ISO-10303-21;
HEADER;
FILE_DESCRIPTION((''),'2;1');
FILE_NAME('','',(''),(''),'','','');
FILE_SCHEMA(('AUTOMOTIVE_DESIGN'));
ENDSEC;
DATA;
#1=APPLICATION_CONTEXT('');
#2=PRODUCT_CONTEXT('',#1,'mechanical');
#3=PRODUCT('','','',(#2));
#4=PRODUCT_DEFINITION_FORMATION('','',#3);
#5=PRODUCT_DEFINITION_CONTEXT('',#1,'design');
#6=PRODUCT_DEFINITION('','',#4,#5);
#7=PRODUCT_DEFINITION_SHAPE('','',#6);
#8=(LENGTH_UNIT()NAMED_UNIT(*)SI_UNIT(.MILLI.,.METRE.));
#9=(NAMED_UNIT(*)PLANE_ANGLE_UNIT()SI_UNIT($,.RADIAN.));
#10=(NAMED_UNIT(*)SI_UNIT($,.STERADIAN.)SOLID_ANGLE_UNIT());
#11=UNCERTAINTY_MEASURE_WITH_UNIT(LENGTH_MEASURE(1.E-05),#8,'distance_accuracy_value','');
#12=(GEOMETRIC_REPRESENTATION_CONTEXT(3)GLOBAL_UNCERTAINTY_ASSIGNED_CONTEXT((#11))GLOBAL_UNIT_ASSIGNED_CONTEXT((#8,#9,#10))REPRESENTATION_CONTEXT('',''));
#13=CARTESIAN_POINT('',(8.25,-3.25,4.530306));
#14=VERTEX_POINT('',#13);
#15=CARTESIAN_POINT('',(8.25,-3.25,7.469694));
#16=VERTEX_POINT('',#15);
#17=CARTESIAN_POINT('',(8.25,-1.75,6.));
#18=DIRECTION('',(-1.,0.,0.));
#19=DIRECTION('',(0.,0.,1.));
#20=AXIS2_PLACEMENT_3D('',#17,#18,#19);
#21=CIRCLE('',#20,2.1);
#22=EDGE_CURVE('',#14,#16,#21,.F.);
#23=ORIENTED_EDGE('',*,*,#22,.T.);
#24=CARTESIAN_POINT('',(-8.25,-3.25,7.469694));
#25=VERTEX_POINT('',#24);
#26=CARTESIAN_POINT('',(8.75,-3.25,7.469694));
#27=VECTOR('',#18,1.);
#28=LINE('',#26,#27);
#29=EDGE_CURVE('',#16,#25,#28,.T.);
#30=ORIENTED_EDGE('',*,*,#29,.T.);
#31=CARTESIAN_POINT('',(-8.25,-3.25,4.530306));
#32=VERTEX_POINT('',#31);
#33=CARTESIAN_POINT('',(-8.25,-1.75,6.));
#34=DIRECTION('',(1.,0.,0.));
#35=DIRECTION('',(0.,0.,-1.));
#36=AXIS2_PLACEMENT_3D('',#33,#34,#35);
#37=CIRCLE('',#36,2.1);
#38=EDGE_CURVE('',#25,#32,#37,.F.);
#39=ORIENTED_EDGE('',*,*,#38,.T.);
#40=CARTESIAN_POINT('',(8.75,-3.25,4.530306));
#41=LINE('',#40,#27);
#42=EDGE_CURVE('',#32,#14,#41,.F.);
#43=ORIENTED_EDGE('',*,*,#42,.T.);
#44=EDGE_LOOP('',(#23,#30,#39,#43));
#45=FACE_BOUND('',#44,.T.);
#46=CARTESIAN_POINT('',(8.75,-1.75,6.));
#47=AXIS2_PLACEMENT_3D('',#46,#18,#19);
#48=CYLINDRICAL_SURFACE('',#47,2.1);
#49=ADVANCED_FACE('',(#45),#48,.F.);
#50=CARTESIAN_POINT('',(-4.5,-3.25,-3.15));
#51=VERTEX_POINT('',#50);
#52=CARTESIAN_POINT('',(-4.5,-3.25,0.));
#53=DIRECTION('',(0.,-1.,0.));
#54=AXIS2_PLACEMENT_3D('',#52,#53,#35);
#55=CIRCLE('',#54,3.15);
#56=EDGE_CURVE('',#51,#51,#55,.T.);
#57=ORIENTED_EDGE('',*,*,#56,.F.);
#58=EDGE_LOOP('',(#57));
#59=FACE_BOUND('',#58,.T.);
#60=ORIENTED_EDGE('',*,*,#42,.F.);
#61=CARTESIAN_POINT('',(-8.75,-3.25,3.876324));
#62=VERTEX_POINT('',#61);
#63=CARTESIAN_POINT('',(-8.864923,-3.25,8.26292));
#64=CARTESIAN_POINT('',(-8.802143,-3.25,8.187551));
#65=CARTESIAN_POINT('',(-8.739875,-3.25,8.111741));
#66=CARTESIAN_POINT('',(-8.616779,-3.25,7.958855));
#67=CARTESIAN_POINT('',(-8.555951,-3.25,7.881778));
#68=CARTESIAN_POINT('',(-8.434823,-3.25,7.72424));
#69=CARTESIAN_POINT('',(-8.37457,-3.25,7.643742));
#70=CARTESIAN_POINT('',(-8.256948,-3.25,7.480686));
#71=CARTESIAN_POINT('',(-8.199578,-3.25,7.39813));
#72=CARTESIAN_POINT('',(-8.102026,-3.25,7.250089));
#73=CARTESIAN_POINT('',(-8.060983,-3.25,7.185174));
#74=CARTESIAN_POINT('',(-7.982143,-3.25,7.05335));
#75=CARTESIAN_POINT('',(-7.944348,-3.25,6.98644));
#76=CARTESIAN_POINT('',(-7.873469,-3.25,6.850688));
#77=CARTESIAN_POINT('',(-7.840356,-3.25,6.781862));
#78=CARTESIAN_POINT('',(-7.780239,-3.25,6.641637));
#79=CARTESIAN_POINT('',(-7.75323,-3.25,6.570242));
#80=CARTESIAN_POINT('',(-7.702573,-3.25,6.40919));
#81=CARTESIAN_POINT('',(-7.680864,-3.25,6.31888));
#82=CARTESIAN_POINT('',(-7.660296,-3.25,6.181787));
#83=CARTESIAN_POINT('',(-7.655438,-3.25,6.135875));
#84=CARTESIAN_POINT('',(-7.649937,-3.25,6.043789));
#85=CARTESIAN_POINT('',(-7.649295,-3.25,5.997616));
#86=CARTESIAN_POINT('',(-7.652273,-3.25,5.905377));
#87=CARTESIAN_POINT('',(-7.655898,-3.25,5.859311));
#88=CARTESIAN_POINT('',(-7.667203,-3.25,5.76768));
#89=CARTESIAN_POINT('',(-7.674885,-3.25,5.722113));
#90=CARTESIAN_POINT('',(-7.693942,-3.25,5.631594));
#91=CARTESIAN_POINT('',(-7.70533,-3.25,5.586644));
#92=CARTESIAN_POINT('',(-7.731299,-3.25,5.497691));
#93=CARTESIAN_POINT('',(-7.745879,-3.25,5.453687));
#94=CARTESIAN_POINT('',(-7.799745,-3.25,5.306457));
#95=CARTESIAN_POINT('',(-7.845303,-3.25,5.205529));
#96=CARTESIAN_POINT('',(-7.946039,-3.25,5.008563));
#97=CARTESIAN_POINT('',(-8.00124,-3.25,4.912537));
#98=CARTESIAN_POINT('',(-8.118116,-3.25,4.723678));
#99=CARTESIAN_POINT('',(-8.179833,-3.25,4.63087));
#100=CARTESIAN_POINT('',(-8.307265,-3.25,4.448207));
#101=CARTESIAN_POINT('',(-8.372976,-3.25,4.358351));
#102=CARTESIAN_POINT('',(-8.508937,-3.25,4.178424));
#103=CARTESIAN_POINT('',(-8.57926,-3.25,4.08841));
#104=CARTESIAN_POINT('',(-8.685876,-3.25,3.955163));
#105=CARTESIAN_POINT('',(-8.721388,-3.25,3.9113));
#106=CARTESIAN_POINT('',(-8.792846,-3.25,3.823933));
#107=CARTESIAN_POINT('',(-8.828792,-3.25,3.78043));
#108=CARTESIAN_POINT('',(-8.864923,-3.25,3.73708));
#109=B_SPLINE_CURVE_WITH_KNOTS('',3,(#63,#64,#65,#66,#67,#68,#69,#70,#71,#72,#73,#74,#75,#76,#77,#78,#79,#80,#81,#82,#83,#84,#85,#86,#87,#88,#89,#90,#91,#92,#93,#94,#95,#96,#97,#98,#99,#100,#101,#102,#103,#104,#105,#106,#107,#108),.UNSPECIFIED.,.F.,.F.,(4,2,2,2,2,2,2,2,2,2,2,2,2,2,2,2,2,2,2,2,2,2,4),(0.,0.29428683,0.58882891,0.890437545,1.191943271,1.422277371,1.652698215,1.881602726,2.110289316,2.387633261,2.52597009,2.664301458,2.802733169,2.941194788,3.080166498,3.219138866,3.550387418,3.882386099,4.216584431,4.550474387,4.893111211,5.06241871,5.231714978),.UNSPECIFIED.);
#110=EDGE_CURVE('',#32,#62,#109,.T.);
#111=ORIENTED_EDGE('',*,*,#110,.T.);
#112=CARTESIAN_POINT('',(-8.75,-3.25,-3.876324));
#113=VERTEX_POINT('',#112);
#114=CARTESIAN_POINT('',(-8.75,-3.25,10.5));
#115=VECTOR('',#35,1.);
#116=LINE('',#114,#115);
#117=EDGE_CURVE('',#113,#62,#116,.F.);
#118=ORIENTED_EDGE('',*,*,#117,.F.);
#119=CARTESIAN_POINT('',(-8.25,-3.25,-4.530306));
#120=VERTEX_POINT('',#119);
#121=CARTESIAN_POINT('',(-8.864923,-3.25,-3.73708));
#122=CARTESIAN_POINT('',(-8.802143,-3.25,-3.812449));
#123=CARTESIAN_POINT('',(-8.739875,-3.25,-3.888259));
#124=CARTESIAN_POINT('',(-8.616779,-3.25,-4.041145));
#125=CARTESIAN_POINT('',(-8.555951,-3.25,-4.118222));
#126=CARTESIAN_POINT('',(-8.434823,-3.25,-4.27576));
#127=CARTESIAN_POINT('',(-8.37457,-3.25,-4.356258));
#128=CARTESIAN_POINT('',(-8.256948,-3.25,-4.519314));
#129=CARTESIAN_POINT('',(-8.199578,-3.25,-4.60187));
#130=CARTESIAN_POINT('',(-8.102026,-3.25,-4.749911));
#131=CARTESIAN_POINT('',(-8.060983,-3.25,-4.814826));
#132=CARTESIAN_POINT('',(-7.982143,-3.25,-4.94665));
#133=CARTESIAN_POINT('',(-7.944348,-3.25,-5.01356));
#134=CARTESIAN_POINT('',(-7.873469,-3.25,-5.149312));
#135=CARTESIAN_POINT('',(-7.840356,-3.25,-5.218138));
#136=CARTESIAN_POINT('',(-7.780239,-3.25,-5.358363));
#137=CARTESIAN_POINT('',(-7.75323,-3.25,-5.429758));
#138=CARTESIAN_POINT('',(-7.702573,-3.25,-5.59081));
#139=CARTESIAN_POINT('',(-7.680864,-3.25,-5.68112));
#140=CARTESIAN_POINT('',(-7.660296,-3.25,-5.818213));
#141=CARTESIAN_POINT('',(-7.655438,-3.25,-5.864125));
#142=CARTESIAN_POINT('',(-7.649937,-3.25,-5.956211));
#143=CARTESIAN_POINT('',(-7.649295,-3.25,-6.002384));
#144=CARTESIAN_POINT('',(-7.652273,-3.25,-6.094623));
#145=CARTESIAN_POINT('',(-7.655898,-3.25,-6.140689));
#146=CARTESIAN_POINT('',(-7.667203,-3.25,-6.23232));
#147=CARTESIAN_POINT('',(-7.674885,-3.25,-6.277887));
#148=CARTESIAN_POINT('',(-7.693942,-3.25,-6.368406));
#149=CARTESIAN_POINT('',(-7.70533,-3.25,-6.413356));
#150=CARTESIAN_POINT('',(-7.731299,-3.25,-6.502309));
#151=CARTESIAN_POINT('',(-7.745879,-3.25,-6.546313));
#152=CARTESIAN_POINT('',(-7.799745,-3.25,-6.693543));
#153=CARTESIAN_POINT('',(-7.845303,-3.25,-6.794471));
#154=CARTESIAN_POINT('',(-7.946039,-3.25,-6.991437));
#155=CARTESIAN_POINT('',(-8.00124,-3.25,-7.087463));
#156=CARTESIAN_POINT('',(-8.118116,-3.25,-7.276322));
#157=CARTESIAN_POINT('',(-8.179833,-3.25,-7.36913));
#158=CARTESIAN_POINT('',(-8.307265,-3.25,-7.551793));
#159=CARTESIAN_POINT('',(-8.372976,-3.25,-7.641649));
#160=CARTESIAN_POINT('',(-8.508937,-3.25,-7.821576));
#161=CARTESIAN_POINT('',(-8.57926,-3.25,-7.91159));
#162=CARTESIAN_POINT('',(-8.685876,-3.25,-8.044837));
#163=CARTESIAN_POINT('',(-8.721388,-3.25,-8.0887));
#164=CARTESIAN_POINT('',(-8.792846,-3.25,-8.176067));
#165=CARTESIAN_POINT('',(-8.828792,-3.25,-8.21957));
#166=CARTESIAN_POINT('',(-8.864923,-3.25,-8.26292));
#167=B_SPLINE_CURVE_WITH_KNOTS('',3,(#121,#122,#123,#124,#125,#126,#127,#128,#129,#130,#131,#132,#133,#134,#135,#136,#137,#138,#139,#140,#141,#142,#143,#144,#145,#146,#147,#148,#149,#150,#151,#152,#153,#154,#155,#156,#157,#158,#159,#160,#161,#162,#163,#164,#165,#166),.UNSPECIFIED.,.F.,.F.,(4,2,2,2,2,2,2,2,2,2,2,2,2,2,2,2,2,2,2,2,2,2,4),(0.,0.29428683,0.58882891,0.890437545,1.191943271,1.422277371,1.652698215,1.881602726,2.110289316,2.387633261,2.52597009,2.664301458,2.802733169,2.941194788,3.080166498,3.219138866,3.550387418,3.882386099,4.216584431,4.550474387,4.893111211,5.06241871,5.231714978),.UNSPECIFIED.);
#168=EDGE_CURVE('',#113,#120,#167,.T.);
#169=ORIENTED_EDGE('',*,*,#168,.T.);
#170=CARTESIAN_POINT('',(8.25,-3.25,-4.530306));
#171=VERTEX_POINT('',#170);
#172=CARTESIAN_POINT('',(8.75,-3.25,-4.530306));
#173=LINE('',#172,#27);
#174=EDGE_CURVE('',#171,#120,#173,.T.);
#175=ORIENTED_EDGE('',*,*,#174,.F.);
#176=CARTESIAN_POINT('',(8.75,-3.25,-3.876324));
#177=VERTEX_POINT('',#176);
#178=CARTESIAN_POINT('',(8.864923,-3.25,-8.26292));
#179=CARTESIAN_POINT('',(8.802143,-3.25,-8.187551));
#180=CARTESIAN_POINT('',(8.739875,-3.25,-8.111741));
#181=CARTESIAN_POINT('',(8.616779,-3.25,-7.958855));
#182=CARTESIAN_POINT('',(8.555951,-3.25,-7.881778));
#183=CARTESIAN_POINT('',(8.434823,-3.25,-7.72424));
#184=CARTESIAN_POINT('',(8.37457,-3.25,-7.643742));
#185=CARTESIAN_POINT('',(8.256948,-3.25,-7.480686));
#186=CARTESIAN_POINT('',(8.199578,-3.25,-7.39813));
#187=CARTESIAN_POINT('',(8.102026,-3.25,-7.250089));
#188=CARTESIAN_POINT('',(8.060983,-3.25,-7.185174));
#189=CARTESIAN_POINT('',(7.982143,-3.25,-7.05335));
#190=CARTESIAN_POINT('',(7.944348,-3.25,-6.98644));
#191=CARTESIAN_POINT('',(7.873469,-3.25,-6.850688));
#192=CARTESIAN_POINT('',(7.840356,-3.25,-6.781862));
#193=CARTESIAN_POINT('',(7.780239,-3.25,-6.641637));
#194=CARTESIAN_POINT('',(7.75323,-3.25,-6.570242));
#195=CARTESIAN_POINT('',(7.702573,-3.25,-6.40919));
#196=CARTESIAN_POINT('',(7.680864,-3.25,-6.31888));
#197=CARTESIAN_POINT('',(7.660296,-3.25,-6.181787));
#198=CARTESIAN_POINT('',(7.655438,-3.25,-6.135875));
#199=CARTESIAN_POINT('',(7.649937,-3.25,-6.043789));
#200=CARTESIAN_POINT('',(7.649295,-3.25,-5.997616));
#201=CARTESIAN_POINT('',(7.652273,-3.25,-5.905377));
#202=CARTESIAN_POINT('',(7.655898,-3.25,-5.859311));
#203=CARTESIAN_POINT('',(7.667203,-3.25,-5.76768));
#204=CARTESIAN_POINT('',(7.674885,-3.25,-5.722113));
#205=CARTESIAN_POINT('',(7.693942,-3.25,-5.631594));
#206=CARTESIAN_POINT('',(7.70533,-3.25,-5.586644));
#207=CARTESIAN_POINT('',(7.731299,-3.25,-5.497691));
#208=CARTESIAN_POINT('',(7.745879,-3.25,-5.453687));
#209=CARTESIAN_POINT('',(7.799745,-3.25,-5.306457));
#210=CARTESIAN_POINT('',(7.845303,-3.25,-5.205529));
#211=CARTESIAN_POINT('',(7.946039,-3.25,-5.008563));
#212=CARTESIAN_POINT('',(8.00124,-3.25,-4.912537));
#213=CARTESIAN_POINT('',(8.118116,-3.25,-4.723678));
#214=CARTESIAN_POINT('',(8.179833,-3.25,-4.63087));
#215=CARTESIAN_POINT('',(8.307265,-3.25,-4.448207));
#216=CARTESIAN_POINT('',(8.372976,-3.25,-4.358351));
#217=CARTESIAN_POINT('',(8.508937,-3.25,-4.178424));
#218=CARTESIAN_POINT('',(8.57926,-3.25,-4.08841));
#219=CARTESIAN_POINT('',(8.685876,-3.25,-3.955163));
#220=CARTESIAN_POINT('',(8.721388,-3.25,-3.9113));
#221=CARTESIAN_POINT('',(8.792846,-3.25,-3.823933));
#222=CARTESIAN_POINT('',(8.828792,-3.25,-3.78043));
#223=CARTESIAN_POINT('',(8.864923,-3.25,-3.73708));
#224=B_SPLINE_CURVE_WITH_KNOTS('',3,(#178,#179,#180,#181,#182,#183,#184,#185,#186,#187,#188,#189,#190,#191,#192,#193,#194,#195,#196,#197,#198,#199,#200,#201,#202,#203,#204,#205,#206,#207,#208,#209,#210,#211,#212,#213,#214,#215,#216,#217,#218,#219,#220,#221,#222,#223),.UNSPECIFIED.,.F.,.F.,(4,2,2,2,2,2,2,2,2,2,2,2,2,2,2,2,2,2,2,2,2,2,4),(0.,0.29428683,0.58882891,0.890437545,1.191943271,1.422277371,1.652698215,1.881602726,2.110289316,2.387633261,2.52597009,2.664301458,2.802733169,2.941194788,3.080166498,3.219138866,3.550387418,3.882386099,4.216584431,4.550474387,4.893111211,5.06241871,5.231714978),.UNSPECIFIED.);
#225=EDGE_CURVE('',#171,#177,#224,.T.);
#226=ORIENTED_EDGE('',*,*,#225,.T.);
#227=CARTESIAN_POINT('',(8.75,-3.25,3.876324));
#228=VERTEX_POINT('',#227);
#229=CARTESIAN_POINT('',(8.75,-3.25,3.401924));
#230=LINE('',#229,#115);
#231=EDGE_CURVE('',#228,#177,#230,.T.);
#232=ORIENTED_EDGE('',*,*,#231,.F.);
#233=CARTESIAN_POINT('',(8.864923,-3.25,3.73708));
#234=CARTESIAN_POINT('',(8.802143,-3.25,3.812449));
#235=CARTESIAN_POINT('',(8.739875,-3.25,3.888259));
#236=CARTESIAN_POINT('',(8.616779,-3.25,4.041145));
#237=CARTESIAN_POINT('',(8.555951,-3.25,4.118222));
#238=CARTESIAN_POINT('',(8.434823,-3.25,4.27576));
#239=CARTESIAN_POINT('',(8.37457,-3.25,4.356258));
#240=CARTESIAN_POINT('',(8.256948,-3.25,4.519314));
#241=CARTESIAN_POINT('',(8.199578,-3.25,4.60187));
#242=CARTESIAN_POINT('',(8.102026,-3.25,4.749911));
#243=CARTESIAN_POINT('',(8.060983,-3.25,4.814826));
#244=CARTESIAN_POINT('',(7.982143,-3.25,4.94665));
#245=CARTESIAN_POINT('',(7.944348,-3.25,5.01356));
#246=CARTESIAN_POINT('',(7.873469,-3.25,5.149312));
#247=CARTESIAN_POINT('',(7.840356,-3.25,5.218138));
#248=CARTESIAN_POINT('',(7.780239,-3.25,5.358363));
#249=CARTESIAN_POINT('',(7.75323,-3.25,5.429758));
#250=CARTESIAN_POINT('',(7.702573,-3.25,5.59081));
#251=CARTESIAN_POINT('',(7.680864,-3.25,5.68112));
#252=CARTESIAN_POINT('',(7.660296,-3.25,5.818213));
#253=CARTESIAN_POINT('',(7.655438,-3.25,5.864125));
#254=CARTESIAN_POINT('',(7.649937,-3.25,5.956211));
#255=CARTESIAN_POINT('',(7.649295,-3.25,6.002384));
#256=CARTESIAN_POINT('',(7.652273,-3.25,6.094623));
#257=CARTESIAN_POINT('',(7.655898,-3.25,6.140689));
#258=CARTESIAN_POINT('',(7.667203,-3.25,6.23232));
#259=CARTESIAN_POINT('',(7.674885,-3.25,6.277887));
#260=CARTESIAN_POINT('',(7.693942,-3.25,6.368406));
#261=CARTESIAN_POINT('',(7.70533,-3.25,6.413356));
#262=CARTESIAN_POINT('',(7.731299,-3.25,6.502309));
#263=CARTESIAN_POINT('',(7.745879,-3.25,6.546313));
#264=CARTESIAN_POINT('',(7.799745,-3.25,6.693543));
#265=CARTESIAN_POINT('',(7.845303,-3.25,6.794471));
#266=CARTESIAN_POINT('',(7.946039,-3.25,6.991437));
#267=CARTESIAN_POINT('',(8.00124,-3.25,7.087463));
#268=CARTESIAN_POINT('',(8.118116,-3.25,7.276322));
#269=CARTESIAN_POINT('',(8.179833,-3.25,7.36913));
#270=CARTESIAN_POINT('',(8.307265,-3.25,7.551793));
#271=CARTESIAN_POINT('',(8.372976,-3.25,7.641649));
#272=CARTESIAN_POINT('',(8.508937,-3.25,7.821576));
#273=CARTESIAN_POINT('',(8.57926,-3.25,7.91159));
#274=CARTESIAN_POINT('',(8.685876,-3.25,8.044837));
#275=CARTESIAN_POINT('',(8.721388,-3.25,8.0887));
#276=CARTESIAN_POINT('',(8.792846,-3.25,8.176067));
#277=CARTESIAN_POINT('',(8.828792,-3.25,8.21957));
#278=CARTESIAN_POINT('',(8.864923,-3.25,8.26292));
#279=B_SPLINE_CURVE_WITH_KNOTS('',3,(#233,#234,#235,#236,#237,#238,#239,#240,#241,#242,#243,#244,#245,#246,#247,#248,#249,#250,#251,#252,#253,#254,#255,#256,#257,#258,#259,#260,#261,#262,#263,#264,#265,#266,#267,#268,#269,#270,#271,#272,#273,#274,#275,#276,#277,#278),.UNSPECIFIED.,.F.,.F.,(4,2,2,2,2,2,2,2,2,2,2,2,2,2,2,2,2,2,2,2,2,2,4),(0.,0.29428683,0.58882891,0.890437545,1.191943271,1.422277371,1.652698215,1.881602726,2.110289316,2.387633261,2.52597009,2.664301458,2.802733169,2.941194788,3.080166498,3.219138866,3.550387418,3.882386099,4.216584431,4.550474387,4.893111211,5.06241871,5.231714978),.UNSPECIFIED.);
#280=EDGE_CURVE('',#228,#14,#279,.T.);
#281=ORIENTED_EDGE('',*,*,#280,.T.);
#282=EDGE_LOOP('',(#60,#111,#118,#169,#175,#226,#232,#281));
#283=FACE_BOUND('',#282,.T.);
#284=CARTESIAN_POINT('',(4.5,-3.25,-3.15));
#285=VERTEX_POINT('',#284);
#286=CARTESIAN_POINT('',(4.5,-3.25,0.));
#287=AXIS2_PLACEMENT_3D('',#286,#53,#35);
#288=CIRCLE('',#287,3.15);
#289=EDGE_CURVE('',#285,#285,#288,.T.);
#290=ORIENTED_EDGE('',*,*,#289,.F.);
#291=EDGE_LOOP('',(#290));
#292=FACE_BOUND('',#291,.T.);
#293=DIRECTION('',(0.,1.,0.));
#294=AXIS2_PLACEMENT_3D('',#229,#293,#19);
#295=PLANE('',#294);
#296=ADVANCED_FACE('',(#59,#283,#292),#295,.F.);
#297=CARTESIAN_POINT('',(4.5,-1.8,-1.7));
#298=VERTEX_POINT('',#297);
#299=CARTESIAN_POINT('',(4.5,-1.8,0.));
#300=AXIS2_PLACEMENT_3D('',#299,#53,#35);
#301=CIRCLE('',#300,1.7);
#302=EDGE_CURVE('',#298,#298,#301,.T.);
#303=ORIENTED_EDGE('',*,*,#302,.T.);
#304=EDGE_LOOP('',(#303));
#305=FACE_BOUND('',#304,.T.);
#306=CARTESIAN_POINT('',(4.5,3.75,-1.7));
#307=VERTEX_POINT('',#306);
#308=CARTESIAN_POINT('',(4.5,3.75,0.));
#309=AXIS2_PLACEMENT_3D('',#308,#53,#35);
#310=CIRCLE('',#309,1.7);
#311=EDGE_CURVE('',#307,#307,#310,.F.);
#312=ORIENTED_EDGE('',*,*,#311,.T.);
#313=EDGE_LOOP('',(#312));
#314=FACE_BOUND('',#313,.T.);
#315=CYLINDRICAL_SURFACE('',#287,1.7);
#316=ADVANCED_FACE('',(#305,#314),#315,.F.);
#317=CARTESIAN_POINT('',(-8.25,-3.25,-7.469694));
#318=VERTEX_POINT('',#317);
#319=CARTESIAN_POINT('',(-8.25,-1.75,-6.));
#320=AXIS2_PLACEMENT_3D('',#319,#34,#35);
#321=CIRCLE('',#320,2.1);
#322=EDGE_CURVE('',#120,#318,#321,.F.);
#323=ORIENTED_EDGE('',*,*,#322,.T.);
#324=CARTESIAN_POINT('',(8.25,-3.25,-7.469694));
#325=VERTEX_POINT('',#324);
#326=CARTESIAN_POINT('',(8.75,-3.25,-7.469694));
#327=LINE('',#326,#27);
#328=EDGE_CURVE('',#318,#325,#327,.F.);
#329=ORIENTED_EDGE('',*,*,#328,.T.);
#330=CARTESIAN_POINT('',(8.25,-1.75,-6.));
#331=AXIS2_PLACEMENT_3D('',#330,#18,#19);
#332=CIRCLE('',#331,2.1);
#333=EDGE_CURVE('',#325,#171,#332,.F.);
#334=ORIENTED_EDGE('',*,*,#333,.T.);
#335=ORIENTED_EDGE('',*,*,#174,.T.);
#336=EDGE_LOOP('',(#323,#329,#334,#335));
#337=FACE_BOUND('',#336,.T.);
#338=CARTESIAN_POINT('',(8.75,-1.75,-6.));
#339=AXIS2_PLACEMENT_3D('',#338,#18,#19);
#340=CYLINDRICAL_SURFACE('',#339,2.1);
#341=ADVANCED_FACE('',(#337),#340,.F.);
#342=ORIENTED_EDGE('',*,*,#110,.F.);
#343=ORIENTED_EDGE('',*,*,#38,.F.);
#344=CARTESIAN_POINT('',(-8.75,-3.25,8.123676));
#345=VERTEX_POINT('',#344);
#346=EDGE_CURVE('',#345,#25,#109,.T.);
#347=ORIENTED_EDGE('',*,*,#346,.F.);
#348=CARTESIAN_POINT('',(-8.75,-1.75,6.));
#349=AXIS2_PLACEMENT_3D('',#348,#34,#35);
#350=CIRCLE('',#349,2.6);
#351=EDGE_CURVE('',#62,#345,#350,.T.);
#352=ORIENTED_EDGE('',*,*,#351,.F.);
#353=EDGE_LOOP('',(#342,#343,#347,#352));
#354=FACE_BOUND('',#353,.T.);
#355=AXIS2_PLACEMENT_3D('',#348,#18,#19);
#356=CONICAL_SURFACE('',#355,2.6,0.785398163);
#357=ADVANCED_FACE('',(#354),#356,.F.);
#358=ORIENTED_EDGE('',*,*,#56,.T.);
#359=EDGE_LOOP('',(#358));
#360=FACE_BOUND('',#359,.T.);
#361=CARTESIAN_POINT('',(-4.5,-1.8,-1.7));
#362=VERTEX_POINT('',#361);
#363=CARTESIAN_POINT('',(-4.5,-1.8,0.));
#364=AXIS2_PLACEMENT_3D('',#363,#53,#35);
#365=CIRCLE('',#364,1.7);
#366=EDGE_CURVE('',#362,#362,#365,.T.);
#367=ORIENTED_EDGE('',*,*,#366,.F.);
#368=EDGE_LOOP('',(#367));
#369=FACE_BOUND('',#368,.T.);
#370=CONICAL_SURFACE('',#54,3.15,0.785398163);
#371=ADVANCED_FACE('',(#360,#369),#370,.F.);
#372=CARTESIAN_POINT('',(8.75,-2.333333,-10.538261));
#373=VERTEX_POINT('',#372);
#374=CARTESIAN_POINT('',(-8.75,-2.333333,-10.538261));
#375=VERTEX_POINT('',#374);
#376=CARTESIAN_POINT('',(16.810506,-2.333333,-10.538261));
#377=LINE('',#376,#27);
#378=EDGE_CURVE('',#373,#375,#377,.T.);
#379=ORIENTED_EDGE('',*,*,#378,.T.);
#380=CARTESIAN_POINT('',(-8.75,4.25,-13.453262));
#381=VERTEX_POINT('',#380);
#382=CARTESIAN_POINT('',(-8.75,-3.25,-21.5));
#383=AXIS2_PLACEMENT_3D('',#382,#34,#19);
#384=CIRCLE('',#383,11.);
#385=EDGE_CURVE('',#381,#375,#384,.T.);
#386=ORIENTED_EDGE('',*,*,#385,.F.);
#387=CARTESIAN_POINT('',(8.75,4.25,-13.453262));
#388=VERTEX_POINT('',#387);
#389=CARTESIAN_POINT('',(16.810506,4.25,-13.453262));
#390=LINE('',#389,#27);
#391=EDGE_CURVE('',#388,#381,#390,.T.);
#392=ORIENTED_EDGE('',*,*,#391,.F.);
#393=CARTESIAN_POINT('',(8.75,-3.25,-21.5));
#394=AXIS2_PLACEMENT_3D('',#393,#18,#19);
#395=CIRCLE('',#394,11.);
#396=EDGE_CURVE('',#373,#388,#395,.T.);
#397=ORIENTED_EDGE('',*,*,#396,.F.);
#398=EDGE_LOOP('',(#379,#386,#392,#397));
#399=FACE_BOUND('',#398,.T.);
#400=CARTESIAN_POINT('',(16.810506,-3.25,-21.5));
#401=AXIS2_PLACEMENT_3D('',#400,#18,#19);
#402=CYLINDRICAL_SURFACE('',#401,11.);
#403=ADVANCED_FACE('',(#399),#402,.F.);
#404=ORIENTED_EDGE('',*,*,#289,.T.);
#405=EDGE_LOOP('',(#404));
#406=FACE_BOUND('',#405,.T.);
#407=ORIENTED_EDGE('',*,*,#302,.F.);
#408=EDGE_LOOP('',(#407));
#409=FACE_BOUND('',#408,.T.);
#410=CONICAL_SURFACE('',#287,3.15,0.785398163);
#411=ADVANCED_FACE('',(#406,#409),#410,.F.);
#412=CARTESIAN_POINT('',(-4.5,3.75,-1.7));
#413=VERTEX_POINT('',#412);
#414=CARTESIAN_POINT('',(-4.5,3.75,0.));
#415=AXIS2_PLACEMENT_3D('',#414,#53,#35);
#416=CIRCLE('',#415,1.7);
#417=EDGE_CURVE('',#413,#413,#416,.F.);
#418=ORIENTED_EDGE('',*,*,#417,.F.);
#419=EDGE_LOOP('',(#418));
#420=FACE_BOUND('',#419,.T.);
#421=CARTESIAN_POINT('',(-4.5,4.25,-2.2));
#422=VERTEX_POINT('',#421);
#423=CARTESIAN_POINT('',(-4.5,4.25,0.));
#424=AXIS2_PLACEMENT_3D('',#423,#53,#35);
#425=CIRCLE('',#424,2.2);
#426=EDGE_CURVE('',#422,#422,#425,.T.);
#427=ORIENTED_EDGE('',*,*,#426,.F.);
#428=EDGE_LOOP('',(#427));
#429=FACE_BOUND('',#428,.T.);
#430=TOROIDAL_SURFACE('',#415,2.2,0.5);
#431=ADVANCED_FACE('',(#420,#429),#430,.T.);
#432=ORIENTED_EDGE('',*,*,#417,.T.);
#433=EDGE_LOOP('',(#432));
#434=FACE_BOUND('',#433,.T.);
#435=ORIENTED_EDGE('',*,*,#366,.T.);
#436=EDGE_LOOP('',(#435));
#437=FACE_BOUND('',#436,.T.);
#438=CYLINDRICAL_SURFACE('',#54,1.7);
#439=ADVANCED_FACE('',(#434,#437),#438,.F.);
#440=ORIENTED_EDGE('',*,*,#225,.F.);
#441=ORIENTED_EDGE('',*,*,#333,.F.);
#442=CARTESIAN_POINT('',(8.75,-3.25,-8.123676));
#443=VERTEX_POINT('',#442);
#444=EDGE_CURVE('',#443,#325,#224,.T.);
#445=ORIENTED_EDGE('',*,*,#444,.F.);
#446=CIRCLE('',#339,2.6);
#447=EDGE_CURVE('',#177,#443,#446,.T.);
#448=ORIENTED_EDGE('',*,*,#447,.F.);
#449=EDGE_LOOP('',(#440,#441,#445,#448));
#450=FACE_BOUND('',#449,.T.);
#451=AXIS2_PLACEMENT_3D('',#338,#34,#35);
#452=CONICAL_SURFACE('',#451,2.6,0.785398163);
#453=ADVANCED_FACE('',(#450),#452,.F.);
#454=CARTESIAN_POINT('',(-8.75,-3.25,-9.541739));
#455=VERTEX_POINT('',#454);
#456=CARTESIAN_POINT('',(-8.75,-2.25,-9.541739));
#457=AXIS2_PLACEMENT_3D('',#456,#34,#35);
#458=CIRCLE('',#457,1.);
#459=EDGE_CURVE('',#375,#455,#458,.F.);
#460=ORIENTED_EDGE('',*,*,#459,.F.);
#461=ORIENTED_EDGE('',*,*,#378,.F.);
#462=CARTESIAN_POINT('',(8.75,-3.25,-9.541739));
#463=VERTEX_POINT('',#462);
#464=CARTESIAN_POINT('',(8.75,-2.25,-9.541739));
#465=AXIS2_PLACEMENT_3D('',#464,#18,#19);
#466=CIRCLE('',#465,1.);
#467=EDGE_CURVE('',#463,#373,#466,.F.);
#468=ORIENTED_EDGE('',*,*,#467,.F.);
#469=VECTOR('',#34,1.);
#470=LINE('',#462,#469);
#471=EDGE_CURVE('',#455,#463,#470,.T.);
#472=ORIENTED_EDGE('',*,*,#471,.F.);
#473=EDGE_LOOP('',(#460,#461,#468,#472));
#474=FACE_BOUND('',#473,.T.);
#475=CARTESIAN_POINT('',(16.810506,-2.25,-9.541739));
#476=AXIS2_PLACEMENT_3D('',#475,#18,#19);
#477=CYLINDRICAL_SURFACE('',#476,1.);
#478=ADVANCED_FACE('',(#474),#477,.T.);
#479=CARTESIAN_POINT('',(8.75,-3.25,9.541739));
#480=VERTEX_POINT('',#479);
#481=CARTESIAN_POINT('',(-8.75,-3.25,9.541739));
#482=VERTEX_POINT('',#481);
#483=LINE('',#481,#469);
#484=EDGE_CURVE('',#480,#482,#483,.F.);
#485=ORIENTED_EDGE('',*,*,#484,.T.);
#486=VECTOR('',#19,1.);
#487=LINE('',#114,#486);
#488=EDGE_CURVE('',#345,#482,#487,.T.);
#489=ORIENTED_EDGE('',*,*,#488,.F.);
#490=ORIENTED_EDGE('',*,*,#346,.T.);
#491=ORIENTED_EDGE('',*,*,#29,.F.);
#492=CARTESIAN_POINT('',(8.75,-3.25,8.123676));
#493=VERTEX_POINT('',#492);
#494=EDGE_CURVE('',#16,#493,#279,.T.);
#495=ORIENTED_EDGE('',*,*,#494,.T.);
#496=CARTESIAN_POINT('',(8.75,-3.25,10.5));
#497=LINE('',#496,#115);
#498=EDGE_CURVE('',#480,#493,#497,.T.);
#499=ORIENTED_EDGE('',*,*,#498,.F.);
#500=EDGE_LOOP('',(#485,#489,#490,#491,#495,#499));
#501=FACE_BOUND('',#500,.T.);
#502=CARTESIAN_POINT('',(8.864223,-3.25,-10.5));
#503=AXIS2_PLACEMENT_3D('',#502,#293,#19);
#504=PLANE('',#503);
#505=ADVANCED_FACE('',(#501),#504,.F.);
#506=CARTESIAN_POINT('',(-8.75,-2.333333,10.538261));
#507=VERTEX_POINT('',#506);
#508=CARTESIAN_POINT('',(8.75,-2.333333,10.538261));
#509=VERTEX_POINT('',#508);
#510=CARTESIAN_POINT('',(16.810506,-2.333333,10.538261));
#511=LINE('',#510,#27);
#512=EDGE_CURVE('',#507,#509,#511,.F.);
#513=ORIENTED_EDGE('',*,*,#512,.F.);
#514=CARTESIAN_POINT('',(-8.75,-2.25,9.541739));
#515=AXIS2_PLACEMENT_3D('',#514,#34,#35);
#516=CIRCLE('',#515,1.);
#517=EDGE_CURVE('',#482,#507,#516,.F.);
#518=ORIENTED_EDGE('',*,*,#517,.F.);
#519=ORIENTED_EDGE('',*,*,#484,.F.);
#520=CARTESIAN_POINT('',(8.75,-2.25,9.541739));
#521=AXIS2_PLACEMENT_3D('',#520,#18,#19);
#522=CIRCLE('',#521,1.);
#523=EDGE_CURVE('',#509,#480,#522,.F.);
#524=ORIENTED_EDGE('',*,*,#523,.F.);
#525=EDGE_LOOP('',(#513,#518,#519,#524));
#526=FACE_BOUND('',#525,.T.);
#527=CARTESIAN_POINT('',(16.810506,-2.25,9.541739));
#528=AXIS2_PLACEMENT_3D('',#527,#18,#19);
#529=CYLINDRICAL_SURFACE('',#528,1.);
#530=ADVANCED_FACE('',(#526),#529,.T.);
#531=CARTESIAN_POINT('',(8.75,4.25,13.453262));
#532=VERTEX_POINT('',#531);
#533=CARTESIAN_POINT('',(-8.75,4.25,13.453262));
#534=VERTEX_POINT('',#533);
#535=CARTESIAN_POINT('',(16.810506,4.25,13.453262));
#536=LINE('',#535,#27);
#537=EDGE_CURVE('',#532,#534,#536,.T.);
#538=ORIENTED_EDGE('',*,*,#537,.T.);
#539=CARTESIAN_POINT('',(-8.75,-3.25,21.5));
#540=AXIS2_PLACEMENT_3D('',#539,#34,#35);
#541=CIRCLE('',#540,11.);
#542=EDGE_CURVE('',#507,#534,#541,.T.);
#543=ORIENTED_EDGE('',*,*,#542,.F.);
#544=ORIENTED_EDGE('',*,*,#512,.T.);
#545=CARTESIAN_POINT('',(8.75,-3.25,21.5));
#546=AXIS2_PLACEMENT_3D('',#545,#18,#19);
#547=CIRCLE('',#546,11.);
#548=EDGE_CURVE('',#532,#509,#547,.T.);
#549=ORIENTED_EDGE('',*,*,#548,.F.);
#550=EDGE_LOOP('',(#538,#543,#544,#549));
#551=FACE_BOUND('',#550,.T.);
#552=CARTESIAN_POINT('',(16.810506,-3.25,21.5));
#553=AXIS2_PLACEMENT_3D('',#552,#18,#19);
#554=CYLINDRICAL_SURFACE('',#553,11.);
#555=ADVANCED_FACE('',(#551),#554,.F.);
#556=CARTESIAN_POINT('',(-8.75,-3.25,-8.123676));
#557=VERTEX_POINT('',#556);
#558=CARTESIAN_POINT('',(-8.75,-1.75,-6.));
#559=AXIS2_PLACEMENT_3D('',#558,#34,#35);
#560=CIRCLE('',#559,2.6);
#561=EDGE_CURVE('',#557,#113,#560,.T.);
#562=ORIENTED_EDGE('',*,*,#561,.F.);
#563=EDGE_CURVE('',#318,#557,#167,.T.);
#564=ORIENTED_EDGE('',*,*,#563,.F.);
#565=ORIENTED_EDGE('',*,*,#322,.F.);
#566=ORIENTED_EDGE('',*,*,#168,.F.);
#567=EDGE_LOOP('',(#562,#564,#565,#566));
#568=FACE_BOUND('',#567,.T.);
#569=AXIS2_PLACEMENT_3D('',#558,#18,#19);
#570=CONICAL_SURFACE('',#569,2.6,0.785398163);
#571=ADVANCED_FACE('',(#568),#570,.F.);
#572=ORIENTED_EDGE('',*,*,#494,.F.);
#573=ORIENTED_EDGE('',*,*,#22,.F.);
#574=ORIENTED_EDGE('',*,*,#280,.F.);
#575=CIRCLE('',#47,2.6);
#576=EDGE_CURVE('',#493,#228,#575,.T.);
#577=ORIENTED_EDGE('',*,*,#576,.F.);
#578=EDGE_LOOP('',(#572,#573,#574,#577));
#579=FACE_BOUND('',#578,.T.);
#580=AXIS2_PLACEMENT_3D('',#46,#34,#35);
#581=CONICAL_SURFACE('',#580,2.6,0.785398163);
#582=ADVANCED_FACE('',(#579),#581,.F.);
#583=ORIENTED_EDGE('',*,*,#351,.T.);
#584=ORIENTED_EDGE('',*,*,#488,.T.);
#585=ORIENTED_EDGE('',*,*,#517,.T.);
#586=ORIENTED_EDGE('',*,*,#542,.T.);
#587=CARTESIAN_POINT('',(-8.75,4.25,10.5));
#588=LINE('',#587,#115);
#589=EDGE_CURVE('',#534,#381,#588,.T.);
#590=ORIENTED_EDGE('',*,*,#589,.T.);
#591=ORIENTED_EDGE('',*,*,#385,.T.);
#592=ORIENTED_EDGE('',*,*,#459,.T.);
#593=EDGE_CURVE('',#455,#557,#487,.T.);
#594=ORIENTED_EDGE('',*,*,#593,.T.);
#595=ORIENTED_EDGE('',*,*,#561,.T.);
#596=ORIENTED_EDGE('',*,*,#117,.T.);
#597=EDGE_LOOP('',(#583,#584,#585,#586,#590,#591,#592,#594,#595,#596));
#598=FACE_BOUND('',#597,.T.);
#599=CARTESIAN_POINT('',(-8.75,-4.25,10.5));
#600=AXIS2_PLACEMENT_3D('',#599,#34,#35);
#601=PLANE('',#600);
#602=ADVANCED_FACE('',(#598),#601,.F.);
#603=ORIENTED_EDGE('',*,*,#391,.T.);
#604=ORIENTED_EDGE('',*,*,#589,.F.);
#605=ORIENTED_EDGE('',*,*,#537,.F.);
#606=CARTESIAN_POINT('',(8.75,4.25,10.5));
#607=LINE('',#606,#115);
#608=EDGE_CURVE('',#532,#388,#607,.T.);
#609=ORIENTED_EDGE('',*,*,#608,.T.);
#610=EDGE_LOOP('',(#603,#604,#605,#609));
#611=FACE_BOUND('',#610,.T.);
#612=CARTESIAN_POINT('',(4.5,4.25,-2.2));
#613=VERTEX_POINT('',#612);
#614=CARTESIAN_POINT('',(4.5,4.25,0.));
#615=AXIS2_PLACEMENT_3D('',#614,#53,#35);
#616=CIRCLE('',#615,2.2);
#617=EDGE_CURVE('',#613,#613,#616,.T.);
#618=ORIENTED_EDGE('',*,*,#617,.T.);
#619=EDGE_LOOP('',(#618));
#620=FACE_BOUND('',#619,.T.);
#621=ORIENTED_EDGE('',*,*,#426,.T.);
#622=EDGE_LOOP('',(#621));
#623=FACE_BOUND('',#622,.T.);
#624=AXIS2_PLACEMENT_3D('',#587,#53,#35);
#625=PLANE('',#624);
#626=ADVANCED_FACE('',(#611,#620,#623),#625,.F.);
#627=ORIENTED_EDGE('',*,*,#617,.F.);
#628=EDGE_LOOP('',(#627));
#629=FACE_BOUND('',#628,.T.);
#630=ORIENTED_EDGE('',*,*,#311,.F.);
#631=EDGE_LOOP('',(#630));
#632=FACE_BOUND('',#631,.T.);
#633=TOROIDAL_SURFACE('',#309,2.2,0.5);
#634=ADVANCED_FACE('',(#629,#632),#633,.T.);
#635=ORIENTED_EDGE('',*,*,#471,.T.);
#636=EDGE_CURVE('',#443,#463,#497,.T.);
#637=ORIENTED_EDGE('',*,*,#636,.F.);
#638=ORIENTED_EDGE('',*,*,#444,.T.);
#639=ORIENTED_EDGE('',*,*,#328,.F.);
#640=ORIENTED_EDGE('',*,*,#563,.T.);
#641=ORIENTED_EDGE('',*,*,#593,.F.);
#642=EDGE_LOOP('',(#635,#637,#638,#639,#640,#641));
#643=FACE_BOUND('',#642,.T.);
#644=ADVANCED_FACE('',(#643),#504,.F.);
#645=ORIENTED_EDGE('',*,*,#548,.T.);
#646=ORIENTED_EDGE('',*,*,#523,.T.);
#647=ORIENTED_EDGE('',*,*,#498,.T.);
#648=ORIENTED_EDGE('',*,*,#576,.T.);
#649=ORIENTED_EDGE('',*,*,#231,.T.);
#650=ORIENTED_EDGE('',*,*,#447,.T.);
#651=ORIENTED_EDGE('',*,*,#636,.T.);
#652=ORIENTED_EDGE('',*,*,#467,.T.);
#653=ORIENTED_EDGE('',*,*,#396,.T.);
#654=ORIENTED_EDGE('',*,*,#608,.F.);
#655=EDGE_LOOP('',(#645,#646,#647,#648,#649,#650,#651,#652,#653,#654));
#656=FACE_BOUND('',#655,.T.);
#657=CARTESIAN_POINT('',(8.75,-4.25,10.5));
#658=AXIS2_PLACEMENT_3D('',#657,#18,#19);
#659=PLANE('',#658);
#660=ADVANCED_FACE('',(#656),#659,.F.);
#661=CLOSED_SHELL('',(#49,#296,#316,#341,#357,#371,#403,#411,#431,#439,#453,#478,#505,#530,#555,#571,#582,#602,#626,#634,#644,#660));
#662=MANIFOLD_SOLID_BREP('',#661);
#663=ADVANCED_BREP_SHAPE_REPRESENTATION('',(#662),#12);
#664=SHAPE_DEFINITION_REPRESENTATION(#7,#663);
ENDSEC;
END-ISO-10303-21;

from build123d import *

# Parameters (mm, degrees)
SKETCH1_W                                           = 17.5
SKETCH1_H                                           = 8.5
BOSS_EXTRUDE1_DEPTH                                 = 10.5
CUT_EXTRUDE1_DEPTH                                  = 21.846162716
CUT_EXTRUDE1_DEPTH_BACK                             = 21.846162716
SKETCH2_R                                           = 2.1
CHAMFER1_SIZE                                       = 0.5
CSK_FOR_M3_COUNTERSUNK_FLAT_HEAD_SCREW1_D           = 3.4
CSK_FOR_M3_COUNTERSUNK_FLAT_HEAD_SCREW1_DEPTH       = 19
CSK_FOR_M3_COUNTERSUNK_FLAT_HEAD_SCREW1_CSINK_D     = 6.3
CSK_FOR_M3_COUNTERSUNK_FLAT_HEAD_SCREW1_CSINK_ANGLE = 90
CSK_FOR_M3_COUNTERSUNK_FLAT_HEAD_SCREW1_TIP         = 1.021463052
FILLET1_R                                           = 0.5
CUT_EXTRUDE2_DEPTH                                  = 21.846162716
CUT_EXTRUDE2_DEPTH_BACK                             = 21.846162716
SKETCH6_W                                           = 21
SKETCH6_H                                           = 1
BOSS_EXTRUDE2_DEPTH                                 = 17.5
FILLET2_R                                           = 1


with BuildPart() as part:
    # Sketch1 → Boss-Extrude1 (new, symmetric)
    with BuildSketch(Plane.XY):
        Rectangle(SKETCH1_W, SKETCH1_H)
    extrude(amount=BOSS_EXTRUDE1_DEPTH, both=True)

    # Sketch2 → Cut-Extrude1 (cut, two sides: drawn at the far end of the back side and taken through both)
    with BuildSketch(Plane.ZY.offset(8.75).offset(-CUT_EXTRUDE1_DEPTH_BACK)):
        with Locations((6, -1.75)):
            Circle(SKETCH2_R)
        with Locations(Location((-6, -1.75, 0), (0, 0, 180))):
            Circle(SKETCH2_R)
        with BuildLine():
            Line((3.401923789, -3.25), (-3.401923789, -3.25))
            ThreePointArc((-3.401923789, -3.25), (-3.813859338, -3.804455891), (-4.341687605, -4.25))
            Line((-4.341687605, -4.25), (4.341687605, -4.25))
            ThreePointArc((4.341687605, -4.25), (3.813859338, -3.804455891), (3.401923789, -3.25))
        make_face()
    extrude(amount=CUT_EXTRUDE1_DEPTH + CUT_EXTRUDE1_DEPTH_BACK, mode=Mode.SUBTRACT)

    # Chamfer1
    # the kernel refuses this chamfer: 0.5 mm, written as the material it takes off along each edge
    with BuildSketch(Plane(origin=(8.75, -1.75, -6), x_dir=(0, 0, -1), z_dir=(0, 1, 0))) as chamfer1_piece_1:
        Polygon((2.1 + CHAMFER1_SIZE, 0), (2.1, CHAMFER1_SIZE), (2.1, 0), align=None)
    revolve(axis=Axis((8.75, -1.75, -6), (-1, 0, 0)), mode=Mode.SUBTRACT)
    with BuildSketch(Plane(origin=(-8.75, -1.75, -6), x_dir=(0, 0, -1), z_dir=(0, 1, 0))) as chamfer1_piece_2:
        Polygon((2.1 + CHAMFER1_SIZE, 0), (2.1, -CHAMFER1_SIZE), (2.1, 0), align=None)
    revolve(axis=Axis((-8.75, -1.75, -6), (-1, 0, 0)), mode=Mode.SUBTRACT)
    with BuildSketch(Plane(origin=(8.75, -1.75, 6), x_dir=(0, 0, 1), z_dir=(0, -1, 0))) as chamfer1_piece_3:
        Polygon((2.1 + CHAMFER1_SIZE, 0), (2.1, CHAMFER1_SIZE), (2.1, 0), align=None)
    revolve(axis=Axis((8.75, -1.75, 6), (-1, 0, 0)), mode=Mode.SUBTRACT)
    with BuildSketch(Plane(origin=(-8.75, -1.75, 6), x_dir=(0, 0, 1), z_dir=(0, -1, 0))) as chamfer1_piece_4:
        Polygon((2.1 + CHAMFER1_SIZE, 0), (2.1, -CHAMFER1_SIZE), (2.1, 0), align=None)
    revolve(axis=Axis((-8.75, -1.75, 6), (-1, 0, 0)), mode=Mode.SUBTRACT)

    # CSK for M3 Countersunk Flat Head Screw1
    with Locations(Plane(origin=(0, -3.25, 0), x_dir=(-1, 0, 0), z_dir=(0, -1, 0))):
        with Locations((4.5, 0), (-4.5, 0)):
            CounterSinkHole(CSK_FOR_M3_COUNTERSUNK_FLAT_HEAD_SCREW1_D / 2, CSK_FOR_M3_COUNTERSUNK_FLAT_HEAD_SCREW1_CSINK_D / 2, depth=CSK_FOR_M3_COUNTERSUNK_FLAT_HEAD_SCREW1_DEPTH, counter_sink_angle=CSK_FOR_M3_COUNTERSUNK_FLAT_HEAD_SCREW1_CSINK_ANGLE)
            with Locations((0, 0, -(CSK_FOR_M3_COUNTERSUNK_FLAT_HEAD_SCREW1_DEPTH + CSK_FOR_M3_COUNTERSUNK_FLAT_HEAD_SCREW1_TIP / 2))):  # 118° drill point
                Cone(0, CSK_FOR_M3_COUNTERSUNK_FLAT_HEAD_SCREW1_D / 2, CSK_FOR_M3_COUNTERSUNK_FLAT_HEAD_SCREW1_TIP, mode=Mode.SUBTRACT)

    # Fillet1
    fillet1_edges = [part.edges().sort_by_distance(p)[0] for p in [
        (2.8, 4.25, 0),
        (-6.2, 4.25, 0),
    ]]
    fillet(fillet1_edges, radius=FILLET1_R)

    # Sketch6 → Cut-Extrude2 (cut, two sides: drawn at the far end of the back side and taken through both)
    with BuildSketch(Plane.ZY.offset(8.75).offset(-CUT_EXTRUDE2_DEPTH_BACK)):
        with Locations((0, -3.75)):
            Rectangle(SKETCH6_W, SKETCH6_H)
    extrude(amount=CUT_EXTRUDE2_DEPTH + CUT_EXTRUDE2_DEPTH_BACK, mode=Mode.SUBTRACT)

    # Sketch8 → Boss-Extrude2 (add)
    with BuildSketch(Plane.ZY.offset(8.75)):
        with BuildLine():
            Line((-13.45326153, 4.25), (-10.5, 4.25))
            Line((-10.5, 4.25), (-10.5, -3.25))
            ThreePointArc((-10.5, -3.25), (-11.26491028, 0.780252897), (-13.45326153, 4.25))
        make_face()
        with BuildLine():
            Line((13.45326153, 4.25), (10.5, 4.25))
            Line((10.5, 4.25), (10.5, -3.25))
            ThreePointArc((10.5, -3.25), (11.26491028, 0.780252897), (13.45326153, 4.25))
        make_face()
    extrude(amount=-BOSS_EXTRUDE2_DEPTH)

    # Fillet2
    fillet2_edges = [part.edges().sort_by_distance(p)[0] for p in [
        (0, -3.25, 10.5),
        (0, -3.25, -10.5),
    ]]
    fillet(fillet2_edges, radius=FILLET2_R)


solid = part.part
